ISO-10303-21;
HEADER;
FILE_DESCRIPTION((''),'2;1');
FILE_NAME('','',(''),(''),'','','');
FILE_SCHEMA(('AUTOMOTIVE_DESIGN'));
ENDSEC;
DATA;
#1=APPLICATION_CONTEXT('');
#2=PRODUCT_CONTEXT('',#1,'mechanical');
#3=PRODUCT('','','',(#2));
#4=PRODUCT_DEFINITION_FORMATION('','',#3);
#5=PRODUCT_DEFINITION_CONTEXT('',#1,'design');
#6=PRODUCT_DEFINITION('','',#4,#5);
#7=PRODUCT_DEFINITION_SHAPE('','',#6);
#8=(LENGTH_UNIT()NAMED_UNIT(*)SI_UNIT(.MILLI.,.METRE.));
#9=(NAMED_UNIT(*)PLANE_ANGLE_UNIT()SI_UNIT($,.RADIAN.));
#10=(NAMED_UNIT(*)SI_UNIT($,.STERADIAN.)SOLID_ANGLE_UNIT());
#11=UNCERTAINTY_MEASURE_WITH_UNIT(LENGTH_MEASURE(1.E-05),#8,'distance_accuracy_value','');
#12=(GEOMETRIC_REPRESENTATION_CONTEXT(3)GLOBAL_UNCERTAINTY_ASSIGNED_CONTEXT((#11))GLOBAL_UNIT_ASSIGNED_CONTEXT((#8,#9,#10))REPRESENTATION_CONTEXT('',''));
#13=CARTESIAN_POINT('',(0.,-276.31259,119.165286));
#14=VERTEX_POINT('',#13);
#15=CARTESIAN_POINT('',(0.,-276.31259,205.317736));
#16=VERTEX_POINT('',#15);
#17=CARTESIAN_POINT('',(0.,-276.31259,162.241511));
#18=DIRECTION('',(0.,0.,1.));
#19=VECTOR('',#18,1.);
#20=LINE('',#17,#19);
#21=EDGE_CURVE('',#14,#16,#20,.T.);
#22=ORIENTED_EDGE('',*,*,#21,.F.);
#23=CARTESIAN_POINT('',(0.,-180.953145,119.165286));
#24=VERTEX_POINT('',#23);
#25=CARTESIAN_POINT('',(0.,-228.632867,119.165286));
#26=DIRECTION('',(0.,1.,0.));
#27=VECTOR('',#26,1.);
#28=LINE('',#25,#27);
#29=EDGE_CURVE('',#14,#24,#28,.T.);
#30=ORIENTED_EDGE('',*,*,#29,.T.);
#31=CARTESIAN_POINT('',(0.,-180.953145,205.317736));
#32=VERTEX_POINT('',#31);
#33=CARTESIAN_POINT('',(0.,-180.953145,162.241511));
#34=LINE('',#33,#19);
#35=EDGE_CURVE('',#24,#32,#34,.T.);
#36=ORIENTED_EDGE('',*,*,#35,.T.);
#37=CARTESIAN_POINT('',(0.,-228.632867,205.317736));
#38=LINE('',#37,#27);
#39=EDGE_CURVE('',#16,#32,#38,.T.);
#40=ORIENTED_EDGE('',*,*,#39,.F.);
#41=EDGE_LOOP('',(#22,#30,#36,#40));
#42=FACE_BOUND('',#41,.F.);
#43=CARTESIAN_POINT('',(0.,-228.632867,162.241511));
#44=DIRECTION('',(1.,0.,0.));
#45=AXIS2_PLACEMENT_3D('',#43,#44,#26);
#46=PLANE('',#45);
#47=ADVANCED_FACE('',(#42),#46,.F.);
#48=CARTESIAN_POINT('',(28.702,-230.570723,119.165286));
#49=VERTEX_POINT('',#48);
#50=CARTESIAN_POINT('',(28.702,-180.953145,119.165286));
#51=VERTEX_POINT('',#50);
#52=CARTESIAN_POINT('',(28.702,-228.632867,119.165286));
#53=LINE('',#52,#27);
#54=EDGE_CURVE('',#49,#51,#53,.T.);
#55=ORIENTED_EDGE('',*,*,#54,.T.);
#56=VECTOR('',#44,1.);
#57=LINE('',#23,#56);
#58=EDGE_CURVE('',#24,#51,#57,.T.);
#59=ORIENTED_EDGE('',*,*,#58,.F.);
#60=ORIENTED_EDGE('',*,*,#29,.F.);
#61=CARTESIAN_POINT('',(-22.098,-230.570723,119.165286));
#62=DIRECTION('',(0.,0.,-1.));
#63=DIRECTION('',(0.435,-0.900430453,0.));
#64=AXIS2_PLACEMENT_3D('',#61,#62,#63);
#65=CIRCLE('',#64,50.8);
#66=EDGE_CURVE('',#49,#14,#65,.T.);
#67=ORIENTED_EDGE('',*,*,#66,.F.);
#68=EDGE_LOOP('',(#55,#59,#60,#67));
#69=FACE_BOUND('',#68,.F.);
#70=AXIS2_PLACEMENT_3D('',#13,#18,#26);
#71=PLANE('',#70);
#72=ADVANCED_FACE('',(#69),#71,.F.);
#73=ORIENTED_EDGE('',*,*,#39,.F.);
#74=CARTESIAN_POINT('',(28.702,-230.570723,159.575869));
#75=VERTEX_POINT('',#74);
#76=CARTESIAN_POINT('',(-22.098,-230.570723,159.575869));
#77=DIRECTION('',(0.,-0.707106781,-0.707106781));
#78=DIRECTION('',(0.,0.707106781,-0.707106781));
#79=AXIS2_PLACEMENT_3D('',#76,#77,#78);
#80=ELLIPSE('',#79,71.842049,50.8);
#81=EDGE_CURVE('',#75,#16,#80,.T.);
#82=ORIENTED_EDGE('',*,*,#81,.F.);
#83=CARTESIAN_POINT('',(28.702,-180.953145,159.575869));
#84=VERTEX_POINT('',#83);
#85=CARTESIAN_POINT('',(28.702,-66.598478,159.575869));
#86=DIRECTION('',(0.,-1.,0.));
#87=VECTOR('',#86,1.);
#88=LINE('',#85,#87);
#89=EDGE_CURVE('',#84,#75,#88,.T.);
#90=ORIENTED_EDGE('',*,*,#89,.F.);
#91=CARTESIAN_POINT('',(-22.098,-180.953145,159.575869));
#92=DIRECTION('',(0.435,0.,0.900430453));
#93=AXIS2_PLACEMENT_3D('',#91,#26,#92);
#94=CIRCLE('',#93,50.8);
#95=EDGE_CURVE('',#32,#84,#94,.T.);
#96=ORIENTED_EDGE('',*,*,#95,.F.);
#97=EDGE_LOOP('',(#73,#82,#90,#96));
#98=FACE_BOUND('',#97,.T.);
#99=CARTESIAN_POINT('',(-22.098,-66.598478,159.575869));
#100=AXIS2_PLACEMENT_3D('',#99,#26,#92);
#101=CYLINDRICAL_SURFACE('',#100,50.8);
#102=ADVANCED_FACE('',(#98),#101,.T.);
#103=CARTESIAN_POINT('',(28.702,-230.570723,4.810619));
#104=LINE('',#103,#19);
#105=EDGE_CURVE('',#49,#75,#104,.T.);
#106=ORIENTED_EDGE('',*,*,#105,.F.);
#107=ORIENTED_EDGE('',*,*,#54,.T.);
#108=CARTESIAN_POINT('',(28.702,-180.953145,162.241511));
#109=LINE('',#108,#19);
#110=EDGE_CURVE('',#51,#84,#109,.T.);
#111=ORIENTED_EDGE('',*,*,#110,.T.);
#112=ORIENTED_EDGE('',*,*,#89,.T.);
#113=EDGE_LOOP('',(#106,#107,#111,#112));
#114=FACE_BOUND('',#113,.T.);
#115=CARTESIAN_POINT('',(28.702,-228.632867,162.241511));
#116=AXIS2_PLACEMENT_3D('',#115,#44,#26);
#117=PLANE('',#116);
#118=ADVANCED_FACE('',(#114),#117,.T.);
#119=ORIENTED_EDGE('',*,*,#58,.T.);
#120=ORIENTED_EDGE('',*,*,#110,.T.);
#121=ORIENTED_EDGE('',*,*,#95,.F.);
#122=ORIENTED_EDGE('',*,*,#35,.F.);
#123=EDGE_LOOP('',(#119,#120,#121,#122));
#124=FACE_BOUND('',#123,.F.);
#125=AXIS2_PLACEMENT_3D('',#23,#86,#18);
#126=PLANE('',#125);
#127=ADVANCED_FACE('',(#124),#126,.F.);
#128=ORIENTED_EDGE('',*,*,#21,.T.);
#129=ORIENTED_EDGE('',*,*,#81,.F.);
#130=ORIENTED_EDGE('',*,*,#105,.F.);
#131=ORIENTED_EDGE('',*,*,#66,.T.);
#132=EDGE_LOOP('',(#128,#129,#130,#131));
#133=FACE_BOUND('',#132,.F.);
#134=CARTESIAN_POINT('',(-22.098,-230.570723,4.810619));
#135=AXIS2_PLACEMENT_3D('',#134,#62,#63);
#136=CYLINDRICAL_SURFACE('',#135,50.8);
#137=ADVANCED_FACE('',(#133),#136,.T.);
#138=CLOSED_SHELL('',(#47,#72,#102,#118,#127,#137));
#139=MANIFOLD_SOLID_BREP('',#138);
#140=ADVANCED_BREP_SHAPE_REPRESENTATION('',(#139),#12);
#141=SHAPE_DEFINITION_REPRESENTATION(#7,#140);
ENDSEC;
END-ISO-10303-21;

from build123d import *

# Parameters (mm, degrees)
F0_W        = 95.3594446182
F0_H        = 86.1524492502
F1_DEPTH    = 28.702
F2_T1_DEPTH = 314.8617842149
F2_T3_DEPTH = 324.0687795829


# Not quite as in the source:
# - a fillet or chamfer that OpenCascade refuses, or shapes differently, is made with other operations: its cross-section is extruded or revolved along the edge and cut away or added


with BuildPart() as f1:
    # F0 (on Right) → F1 (new body)
    with BuildSketch(Plane.YZ):
        with Locations((-228.6328673363, 162.2415110469)):
            Rectangle(F0_W, F0_H)
    extrude(amount=F1_DEPTH)

    # F2: fillet of radius 50.8 on 2 edges, made by hand

    # F2_s2 → F2_t1 (cut)
    with BuildSketch(Plane.XY.offset(4.8106189394)):
        with BuildLine():
            ThreePointArc((0, -276.3125896454), (20.9323288391, -257.5712930168), (28.702, -230.5707226524))
            Line((28.702, -230.5707226524), (28.702, -276.3125896454))
            Line((28.702, -276.3125896454), (0, -276.3125896454))
        make_face()
    extrude(amount=F2_T1_DEPTH, mode=Mode.SUBTRACT)

    # F2_s4 → F2_t3 (cut)
    with BuildSketch(Plane.XZ.offset(66.5984775448)):
        with BuildLine():
            ThreePointArc((0, 205.317735672), (20.9323288391, 186.5764390434), (28.702, 159.5758686791))
            Line((28.702, 159.5758686791), (28.702, 205.317735672))
            Line((28.702, 205.317735672), (0, 205.317735672))
        make_face()
    extrude(amount=F2_T3_DEPTH, mode=Mode.SUBTRACT)


solid = f1.part
